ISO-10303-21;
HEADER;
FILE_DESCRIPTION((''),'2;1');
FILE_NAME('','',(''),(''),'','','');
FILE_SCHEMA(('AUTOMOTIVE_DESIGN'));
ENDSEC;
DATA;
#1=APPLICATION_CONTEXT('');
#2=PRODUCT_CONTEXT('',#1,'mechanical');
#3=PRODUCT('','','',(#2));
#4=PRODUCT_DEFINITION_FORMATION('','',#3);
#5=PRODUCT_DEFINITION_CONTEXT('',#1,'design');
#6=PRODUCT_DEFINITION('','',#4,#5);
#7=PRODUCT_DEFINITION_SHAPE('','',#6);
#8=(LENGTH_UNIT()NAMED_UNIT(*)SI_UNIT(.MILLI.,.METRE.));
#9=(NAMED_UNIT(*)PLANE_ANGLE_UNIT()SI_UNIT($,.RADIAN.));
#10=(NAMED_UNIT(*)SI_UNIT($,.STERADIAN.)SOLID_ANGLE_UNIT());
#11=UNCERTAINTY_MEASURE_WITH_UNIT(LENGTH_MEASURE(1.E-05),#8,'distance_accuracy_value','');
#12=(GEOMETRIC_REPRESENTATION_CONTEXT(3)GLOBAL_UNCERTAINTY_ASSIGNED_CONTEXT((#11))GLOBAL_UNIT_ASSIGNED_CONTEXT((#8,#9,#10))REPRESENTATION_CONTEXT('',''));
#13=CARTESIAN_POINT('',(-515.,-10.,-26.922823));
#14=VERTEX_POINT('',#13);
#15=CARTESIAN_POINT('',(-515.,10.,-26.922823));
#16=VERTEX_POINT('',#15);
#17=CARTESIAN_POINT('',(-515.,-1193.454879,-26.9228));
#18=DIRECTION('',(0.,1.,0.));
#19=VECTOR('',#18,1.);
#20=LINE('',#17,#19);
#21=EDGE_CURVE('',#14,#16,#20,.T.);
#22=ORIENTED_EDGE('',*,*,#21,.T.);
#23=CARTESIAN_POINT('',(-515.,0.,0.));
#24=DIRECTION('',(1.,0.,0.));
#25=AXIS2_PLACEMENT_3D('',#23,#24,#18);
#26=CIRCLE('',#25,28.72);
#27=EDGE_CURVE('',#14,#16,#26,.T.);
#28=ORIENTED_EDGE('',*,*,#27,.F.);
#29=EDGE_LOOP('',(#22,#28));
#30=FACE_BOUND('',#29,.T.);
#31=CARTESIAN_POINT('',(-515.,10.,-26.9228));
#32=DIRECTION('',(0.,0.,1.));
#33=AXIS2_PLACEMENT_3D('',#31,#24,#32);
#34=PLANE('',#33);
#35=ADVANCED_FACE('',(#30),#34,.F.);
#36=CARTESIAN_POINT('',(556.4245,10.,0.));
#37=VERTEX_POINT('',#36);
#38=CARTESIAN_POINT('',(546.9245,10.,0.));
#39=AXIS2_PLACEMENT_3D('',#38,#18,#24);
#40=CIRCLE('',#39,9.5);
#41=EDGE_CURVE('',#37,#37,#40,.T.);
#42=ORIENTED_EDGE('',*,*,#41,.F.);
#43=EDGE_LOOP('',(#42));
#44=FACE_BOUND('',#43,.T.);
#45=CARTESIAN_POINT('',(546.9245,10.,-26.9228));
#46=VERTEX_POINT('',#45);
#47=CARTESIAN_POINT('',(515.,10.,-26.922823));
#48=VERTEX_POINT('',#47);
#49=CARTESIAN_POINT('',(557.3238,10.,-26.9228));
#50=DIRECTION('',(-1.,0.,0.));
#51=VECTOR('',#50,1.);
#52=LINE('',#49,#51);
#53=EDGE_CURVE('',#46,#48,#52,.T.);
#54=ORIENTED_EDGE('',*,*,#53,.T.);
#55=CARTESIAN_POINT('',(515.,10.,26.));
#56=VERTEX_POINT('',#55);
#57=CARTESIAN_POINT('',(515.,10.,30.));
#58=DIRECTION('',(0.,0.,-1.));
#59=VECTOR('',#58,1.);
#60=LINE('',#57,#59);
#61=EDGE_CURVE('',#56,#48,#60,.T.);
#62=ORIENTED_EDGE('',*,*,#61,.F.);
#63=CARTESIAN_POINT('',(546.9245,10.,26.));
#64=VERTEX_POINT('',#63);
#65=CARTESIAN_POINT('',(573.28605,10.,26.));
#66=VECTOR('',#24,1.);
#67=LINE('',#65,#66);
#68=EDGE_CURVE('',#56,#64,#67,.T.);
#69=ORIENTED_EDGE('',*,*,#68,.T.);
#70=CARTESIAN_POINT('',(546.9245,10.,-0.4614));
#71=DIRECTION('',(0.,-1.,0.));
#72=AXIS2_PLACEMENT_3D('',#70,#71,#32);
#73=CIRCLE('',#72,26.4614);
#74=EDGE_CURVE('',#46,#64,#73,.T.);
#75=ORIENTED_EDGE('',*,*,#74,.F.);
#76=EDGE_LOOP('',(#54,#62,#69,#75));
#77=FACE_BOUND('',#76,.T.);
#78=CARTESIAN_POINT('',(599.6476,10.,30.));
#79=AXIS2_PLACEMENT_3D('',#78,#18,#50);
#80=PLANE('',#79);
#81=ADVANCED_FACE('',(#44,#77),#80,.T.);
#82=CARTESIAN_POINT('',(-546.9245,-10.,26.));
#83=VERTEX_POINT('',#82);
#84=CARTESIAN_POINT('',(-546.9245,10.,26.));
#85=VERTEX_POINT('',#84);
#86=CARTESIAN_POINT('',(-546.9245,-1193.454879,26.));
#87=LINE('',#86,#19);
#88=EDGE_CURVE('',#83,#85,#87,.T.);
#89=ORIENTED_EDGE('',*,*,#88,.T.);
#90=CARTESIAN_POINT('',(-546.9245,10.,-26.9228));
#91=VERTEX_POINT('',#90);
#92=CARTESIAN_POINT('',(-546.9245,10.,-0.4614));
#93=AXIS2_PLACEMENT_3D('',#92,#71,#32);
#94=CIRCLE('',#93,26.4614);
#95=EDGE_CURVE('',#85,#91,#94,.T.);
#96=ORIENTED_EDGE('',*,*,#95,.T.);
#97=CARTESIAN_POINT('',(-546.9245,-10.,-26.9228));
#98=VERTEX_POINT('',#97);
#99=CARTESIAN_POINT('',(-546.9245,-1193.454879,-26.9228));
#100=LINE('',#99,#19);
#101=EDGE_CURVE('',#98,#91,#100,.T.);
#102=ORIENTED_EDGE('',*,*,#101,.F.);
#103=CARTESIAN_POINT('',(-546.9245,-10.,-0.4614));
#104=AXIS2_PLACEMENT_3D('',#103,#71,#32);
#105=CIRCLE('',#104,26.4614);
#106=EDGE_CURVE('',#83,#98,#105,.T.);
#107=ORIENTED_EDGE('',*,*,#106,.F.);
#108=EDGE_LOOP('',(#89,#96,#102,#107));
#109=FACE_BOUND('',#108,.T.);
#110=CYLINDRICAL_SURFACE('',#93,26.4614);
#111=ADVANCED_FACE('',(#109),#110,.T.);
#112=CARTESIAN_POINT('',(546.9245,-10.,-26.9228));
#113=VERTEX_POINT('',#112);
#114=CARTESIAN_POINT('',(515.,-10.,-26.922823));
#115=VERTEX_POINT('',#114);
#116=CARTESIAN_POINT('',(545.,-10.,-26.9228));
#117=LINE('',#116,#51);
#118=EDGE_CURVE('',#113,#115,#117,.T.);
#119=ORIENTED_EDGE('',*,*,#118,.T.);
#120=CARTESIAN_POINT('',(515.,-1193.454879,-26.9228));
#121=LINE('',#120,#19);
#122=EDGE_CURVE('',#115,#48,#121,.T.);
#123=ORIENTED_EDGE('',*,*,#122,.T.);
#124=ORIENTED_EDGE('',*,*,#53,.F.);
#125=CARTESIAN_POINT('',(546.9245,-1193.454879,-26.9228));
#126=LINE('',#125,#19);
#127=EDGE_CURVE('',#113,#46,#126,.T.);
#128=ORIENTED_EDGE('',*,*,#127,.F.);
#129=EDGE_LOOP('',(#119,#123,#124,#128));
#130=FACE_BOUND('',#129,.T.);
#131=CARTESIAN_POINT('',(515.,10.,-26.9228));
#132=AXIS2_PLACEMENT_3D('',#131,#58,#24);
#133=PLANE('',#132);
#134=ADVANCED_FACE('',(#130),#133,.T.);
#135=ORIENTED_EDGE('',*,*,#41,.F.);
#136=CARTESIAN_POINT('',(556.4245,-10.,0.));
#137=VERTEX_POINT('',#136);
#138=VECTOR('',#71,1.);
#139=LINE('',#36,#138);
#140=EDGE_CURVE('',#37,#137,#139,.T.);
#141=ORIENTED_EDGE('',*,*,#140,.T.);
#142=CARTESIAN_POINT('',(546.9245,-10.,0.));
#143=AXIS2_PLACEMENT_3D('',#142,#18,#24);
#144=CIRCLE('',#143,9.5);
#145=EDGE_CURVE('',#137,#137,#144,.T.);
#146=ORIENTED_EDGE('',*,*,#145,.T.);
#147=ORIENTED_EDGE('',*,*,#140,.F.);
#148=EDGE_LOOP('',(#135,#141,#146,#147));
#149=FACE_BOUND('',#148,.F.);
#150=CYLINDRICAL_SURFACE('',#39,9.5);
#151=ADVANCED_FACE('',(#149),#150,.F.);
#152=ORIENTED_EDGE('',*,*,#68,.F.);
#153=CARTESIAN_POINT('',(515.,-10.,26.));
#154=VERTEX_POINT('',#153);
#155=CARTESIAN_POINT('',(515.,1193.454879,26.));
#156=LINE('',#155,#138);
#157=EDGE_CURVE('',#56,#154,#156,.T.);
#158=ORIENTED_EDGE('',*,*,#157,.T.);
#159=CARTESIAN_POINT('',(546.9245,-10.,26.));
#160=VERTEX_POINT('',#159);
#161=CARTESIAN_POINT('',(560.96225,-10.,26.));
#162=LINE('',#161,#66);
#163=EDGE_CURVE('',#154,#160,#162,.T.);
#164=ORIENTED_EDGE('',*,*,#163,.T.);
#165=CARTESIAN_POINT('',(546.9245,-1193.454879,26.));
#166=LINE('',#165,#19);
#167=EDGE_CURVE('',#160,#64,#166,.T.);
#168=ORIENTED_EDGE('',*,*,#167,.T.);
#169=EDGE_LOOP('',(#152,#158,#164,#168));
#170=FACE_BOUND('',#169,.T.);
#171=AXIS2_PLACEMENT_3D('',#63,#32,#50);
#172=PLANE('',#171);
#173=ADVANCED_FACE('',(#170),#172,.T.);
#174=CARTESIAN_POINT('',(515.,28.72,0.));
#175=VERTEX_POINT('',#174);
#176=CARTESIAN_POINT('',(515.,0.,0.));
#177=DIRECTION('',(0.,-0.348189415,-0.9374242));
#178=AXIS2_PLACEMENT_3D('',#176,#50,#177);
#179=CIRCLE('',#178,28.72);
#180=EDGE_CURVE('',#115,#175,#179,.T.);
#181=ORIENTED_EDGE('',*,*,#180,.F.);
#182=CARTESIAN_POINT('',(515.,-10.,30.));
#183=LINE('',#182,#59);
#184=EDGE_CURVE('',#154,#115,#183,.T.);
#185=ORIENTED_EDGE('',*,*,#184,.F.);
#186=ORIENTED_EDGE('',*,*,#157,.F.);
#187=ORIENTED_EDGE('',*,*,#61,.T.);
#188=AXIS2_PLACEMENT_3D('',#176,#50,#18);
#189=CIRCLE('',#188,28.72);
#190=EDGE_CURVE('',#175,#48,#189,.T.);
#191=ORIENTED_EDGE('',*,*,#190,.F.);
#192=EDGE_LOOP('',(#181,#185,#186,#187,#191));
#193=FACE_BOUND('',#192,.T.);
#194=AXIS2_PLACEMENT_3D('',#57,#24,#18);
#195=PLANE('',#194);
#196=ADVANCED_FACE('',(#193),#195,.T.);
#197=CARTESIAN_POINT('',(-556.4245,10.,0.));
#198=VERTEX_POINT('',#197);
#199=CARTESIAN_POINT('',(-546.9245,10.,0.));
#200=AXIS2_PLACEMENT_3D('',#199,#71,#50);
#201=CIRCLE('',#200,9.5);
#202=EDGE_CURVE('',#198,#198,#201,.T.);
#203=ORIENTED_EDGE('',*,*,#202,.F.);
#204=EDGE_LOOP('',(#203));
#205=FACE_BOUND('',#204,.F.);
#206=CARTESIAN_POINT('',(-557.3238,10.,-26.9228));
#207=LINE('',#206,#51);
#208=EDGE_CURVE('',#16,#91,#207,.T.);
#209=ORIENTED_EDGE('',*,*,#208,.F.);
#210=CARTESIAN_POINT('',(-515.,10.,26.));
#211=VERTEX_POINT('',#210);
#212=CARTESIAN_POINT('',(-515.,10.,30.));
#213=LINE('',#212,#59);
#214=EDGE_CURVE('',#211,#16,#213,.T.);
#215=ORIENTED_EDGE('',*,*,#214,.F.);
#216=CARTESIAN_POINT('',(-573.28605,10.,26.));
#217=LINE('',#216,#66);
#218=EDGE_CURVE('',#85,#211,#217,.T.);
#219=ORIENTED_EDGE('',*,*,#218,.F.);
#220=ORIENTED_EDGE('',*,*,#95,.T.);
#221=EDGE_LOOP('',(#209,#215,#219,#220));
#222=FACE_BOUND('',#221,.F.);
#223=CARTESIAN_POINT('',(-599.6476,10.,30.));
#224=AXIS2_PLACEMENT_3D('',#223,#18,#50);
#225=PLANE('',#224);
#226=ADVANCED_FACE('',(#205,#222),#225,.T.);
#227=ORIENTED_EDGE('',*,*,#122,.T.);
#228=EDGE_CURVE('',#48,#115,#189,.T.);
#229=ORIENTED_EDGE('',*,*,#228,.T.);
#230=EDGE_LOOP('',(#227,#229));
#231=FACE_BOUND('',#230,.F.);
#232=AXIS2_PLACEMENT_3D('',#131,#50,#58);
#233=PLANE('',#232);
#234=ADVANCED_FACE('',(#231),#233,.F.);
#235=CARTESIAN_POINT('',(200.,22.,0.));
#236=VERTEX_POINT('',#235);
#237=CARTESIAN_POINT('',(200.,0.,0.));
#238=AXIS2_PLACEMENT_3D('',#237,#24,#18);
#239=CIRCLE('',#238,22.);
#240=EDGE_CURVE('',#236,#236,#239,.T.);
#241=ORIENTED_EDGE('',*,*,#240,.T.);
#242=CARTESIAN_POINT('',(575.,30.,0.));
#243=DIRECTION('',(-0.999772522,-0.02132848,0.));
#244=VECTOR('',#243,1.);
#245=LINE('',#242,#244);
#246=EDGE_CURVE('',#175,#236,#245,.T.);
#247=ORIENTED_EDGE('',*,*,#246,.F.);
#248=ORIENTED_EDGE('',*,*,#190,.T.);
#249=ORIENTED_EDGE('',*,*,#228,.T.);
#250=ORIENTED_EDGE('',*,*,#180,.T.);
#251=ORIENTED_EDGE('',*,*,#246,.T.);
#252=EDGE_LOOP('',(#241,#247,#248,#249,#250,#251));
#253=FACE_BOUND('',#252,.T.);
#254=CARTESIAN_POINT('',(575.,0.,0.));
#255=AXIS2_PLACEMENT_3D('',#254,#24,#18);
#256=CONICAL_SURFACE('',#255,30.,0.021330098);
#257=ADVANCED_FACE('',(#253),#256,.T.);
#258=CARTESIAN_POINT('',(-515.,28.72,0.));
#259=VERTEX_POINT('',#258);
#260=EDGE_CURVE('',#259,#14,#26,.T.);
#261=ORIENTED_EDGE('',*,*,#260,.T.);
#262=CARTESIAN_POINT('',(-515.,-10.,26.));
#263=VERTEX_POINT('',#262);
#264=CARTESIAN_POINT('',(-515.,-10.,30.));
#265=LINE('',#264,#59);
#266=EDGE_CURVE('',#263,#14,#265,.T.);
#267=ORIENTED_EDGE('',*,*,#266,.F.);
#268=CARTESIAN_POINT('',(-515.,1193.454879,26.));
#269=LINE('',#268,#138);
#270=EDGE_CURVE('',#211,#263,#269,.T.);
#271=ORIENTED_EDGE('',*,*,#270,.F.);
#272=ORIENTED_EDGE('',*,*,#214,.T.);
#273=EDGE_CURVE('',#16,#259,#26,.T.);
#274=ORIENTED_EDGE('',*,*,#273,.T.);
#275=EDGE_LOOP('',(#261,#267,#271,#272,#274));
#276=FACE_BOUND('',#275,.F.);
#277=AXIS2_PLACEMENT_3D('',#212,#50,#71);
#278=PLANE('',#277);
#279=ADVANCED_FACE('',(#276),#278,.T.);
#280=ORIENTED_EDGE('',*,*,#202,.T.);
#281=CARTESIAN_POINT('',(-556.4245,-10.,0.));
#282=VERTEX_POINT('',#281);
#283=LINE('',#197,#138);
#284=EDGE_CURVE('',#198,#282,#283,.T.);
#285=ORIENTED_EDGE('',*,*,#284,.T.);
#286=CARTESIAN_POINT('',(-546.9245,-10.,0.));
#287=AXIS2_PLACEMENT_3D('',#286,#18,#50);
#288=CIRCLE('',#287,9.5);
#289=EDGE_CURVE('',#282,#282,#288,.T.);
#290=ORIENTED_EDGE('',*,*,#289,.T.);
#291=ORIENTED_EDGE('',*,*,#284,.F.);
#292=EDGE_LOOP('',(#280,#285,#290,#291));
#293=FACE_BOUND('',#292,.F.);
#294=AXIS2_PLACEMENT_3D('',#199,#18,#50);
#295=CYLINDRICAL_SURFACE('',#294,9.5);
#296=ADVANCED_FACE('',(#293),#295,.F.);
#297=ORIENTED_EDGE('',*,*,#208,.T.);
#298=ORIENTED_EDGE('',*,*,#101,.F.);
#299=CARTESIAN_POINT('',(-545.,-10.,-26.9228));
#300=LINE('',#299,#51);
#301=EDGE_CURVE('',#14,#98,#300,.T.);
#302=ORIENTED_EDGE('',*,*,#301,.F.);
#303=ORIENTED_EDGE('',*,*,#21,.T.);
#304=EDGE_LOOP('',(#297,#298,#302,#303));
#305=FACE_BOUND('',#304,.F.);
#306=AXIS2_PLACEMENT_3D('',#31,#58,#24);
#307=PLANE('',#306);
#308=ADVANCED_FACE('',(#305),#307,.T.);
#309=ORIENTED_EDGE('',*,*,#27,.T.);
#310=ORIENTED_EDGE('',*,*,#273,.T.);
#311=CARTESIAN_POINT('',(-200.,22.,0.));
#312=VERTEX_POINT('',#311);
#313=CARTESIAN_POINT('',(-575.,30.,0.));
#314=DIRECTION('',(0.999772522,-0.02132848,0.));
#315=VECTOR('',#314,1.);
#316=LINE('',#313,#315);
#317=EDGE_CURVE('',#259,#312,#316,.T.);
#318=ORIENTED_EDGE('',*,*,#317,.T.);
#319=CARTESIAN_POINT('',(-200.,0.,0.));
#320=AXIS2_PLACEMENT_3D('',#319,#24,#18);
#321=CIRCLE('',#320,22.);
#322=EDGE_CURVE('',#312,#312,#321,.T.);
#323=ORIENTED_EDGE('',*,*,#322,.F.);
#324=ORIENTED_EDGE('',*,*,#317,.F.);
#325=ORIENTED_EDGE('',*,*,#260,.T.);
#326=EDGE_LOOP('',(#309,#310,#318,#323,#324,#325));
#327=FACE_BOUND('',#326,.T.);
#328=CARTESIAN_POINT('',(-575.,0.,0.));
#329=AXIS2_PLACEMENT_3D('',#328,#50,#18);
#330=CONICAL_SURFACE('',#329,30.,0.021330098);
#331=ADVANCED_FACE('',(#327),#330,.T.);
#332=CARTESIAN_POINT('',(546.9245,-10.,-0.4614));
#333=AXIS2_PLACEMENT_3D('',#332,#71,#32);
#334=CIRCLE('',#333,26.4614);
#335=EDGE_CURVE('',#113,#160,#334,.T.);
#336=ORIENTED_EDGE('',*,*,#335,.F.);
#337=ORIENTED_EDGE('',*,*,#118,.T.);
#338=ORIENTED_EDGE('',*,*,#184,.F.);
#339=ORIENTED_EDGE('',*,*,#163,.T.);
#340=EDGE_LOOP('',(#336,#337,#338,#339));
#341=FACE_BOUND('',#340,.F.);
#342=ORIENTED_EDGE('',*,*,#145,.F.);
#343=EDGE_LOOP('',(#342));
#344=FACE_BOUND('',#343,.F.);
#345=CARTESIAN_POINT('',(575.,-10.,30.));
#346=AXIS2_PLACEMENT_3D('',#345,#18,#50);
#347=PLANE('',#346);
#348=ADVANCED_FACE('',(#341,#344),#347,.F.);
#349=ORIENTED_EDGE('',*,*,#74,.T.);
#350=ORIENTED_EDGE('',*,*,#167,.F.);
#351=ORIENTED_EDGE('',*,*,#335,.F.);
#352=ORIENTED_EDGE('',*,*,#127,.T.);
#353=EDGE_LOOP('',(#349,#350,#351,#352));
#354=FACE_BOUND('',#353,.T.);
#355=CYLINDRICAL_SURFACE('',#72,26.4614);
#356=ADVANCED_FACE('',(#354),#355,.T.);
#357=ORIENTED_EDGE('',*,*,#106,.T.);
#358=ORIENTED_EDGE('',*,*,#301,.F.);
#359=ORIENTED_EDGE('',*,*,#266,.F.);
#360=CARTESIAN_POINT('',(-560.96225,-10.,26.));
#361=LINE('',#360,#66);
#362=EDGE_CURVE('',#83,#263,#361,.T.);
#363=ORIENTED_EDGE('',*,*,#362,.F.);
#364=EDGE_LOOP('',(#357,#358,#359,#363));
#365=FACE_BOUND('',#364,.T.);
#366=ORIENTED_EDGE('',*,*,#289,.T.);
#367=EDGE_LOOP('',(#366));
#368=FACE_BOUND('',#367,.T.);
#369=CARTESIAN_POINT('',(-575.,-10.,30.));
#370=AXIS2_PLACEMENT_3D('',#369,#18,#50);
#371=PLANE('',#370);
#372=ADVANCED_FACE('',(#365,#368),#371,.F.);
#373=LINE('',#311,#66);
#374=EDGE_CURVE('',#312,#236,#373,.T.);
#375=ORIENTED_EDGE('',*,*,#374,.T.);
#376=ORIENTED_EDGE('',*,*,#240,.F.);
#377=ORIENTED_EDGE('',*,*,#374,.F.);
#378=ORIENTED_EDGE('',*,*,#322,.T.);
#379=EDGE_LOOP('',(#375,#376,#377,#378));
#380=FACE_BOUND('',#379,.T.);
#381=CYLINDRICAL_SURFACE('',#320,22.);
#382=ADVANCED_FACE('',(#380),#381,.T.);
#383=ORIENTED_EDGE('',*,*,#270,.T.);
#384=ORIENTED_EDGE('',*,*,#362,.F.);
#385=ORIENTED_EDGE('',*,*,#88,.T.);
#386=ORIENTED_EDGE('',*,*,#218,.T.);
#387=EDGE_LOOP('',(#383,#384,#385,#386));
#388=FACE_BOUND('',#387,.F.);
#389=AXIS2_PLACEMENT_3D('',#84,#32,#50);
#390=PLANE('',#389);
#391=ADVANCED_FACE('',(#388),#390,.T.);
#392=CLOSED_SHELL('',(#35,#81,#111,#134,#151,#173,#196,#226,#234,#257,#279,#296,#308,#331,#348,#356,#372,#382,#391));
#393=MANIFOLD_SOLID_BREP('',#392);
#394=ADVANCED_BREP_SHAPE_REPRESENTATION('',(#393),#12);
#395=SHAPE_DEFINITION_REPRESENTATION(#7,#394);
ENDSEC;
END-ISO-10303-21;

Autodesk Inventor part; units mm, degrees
ref_plane "YZ Plane" through (0, 0, 0) normal (1, 0, 0) x (0, 1, 0)
ref_plane "XZ Plane" through (0, 0, 0) normal (0, 1, 0) x (-1, 0, 0)
sketch "Sketch1" plane through (0, 0, 0) normal (0, 0, 1) x (1, 0, 0)
  line L0 (0, 0) -> (575, 0)
  line L1 (575, 0) -> (575, 30)
  line L2 (575, 30) -> (200, 22)
  line L3 (200, 22) -> (0, 22)
  line L4 (0, 22) -> (0, 0)
  dimension "d0" = 575
  dimension "d1" = 30
  dimension "d2" = 22
  dimension "d3" = 200
revolve "Revolution1" add sketch "Sketch1" angle 360 about axis through (0, 0, 0) along (1, 0, 0)
ref_plane "Work Plane1" through (0, 0, 30) normal (0, 0, 1) x (1, 0, 0)
sketch "Sketch2" plane through (0, 0, 30) normal (0, 0, 1) x (1, 0, 0)
  line L0 (515, 39.8306) -> (599.6476, 39.8306)
  line L1 (599.6476, 39.8306) -> (599.6476, 10)
  line L2 (599.6476, 10) -> (515, 10)
  line L3 (515, 10) -> (515, 39.8306)
  line L4 (509.4984, 0) -> (515, 0)
  line L5 (575, -30) -> (575, 30) projected
  line L6 (512.2492, 0) -> (602.6525, 0)
  line L7 (515, -39.8306) -> (599.6476, -39.8306)
  line L8 (599.6476, -39.8306) -> (599.6476, -10)
  line L9 (599.6476, -10) -> (515, -10)
  line L10 (515, -10) -> (515, -39.8306)
  point P0 (0, 0)
  dimension "d6" = 60
  dimension "d7" = 10
extrude "Extrusion1" cut sketch "Sketch2" along normal through all both and the other way through all
sketch "Sketch3" plane through (575, 10, 28.2843) normal (0, 1, 0) x (1, 0, 0)
  line L0 (-60, 55.2071) -> (-60, 1.3614) projected
  line L1 (-60, 55.2071) -> (-28.0755, 55.2071)
  line L2 (-28.0755, 2.2843) -> (-60, 2.2843)
  line L3 (-60, 55.2071) -> (-60, 2.2843)
  arc A0 (-28.0755, 2.2843) -> (-28.0755, 55.2071) centre (-28.0755, 28.7457) ccw
  line L4 (-60, 65.181) -> (5.1582, 65.181)
  line L5 (5.1582, 65.181) -> (5.1582, -12.094)
  line L6 (5.1582, -12.094) -> (-60, -12.094)
  line L7 (-60, -12.094) -> (-60, 65.181)
  point P0 (-575, 28.2843)
  point P1 (-60, 1.3614)
extrude "Extrusion2" cut sketch "Sketch3" along normal through all both and the other way through all contours L7 L4 L5 L6 L0 L2 A0 L1
sketch "Sketch4" plane through (515, 10, -26.9228) normal (0, 1, 0) x (1, 0, 0)
  circle A0 centre (31.9245, -26.9228) radius 9.5
  point P0 (-515, -26.9228)
  dimension "d12" = 19
extrude "Extrusion3" cut sketch "Sketch4" against normal through all
mirror "Mirror1" about plane through (0, 0, 0) normal (1, 0, 0) of "Revolution1", "Extrusion2", "Extrusion3", "Extrusion1"
properties part number "Arjun_SteeringRod"
